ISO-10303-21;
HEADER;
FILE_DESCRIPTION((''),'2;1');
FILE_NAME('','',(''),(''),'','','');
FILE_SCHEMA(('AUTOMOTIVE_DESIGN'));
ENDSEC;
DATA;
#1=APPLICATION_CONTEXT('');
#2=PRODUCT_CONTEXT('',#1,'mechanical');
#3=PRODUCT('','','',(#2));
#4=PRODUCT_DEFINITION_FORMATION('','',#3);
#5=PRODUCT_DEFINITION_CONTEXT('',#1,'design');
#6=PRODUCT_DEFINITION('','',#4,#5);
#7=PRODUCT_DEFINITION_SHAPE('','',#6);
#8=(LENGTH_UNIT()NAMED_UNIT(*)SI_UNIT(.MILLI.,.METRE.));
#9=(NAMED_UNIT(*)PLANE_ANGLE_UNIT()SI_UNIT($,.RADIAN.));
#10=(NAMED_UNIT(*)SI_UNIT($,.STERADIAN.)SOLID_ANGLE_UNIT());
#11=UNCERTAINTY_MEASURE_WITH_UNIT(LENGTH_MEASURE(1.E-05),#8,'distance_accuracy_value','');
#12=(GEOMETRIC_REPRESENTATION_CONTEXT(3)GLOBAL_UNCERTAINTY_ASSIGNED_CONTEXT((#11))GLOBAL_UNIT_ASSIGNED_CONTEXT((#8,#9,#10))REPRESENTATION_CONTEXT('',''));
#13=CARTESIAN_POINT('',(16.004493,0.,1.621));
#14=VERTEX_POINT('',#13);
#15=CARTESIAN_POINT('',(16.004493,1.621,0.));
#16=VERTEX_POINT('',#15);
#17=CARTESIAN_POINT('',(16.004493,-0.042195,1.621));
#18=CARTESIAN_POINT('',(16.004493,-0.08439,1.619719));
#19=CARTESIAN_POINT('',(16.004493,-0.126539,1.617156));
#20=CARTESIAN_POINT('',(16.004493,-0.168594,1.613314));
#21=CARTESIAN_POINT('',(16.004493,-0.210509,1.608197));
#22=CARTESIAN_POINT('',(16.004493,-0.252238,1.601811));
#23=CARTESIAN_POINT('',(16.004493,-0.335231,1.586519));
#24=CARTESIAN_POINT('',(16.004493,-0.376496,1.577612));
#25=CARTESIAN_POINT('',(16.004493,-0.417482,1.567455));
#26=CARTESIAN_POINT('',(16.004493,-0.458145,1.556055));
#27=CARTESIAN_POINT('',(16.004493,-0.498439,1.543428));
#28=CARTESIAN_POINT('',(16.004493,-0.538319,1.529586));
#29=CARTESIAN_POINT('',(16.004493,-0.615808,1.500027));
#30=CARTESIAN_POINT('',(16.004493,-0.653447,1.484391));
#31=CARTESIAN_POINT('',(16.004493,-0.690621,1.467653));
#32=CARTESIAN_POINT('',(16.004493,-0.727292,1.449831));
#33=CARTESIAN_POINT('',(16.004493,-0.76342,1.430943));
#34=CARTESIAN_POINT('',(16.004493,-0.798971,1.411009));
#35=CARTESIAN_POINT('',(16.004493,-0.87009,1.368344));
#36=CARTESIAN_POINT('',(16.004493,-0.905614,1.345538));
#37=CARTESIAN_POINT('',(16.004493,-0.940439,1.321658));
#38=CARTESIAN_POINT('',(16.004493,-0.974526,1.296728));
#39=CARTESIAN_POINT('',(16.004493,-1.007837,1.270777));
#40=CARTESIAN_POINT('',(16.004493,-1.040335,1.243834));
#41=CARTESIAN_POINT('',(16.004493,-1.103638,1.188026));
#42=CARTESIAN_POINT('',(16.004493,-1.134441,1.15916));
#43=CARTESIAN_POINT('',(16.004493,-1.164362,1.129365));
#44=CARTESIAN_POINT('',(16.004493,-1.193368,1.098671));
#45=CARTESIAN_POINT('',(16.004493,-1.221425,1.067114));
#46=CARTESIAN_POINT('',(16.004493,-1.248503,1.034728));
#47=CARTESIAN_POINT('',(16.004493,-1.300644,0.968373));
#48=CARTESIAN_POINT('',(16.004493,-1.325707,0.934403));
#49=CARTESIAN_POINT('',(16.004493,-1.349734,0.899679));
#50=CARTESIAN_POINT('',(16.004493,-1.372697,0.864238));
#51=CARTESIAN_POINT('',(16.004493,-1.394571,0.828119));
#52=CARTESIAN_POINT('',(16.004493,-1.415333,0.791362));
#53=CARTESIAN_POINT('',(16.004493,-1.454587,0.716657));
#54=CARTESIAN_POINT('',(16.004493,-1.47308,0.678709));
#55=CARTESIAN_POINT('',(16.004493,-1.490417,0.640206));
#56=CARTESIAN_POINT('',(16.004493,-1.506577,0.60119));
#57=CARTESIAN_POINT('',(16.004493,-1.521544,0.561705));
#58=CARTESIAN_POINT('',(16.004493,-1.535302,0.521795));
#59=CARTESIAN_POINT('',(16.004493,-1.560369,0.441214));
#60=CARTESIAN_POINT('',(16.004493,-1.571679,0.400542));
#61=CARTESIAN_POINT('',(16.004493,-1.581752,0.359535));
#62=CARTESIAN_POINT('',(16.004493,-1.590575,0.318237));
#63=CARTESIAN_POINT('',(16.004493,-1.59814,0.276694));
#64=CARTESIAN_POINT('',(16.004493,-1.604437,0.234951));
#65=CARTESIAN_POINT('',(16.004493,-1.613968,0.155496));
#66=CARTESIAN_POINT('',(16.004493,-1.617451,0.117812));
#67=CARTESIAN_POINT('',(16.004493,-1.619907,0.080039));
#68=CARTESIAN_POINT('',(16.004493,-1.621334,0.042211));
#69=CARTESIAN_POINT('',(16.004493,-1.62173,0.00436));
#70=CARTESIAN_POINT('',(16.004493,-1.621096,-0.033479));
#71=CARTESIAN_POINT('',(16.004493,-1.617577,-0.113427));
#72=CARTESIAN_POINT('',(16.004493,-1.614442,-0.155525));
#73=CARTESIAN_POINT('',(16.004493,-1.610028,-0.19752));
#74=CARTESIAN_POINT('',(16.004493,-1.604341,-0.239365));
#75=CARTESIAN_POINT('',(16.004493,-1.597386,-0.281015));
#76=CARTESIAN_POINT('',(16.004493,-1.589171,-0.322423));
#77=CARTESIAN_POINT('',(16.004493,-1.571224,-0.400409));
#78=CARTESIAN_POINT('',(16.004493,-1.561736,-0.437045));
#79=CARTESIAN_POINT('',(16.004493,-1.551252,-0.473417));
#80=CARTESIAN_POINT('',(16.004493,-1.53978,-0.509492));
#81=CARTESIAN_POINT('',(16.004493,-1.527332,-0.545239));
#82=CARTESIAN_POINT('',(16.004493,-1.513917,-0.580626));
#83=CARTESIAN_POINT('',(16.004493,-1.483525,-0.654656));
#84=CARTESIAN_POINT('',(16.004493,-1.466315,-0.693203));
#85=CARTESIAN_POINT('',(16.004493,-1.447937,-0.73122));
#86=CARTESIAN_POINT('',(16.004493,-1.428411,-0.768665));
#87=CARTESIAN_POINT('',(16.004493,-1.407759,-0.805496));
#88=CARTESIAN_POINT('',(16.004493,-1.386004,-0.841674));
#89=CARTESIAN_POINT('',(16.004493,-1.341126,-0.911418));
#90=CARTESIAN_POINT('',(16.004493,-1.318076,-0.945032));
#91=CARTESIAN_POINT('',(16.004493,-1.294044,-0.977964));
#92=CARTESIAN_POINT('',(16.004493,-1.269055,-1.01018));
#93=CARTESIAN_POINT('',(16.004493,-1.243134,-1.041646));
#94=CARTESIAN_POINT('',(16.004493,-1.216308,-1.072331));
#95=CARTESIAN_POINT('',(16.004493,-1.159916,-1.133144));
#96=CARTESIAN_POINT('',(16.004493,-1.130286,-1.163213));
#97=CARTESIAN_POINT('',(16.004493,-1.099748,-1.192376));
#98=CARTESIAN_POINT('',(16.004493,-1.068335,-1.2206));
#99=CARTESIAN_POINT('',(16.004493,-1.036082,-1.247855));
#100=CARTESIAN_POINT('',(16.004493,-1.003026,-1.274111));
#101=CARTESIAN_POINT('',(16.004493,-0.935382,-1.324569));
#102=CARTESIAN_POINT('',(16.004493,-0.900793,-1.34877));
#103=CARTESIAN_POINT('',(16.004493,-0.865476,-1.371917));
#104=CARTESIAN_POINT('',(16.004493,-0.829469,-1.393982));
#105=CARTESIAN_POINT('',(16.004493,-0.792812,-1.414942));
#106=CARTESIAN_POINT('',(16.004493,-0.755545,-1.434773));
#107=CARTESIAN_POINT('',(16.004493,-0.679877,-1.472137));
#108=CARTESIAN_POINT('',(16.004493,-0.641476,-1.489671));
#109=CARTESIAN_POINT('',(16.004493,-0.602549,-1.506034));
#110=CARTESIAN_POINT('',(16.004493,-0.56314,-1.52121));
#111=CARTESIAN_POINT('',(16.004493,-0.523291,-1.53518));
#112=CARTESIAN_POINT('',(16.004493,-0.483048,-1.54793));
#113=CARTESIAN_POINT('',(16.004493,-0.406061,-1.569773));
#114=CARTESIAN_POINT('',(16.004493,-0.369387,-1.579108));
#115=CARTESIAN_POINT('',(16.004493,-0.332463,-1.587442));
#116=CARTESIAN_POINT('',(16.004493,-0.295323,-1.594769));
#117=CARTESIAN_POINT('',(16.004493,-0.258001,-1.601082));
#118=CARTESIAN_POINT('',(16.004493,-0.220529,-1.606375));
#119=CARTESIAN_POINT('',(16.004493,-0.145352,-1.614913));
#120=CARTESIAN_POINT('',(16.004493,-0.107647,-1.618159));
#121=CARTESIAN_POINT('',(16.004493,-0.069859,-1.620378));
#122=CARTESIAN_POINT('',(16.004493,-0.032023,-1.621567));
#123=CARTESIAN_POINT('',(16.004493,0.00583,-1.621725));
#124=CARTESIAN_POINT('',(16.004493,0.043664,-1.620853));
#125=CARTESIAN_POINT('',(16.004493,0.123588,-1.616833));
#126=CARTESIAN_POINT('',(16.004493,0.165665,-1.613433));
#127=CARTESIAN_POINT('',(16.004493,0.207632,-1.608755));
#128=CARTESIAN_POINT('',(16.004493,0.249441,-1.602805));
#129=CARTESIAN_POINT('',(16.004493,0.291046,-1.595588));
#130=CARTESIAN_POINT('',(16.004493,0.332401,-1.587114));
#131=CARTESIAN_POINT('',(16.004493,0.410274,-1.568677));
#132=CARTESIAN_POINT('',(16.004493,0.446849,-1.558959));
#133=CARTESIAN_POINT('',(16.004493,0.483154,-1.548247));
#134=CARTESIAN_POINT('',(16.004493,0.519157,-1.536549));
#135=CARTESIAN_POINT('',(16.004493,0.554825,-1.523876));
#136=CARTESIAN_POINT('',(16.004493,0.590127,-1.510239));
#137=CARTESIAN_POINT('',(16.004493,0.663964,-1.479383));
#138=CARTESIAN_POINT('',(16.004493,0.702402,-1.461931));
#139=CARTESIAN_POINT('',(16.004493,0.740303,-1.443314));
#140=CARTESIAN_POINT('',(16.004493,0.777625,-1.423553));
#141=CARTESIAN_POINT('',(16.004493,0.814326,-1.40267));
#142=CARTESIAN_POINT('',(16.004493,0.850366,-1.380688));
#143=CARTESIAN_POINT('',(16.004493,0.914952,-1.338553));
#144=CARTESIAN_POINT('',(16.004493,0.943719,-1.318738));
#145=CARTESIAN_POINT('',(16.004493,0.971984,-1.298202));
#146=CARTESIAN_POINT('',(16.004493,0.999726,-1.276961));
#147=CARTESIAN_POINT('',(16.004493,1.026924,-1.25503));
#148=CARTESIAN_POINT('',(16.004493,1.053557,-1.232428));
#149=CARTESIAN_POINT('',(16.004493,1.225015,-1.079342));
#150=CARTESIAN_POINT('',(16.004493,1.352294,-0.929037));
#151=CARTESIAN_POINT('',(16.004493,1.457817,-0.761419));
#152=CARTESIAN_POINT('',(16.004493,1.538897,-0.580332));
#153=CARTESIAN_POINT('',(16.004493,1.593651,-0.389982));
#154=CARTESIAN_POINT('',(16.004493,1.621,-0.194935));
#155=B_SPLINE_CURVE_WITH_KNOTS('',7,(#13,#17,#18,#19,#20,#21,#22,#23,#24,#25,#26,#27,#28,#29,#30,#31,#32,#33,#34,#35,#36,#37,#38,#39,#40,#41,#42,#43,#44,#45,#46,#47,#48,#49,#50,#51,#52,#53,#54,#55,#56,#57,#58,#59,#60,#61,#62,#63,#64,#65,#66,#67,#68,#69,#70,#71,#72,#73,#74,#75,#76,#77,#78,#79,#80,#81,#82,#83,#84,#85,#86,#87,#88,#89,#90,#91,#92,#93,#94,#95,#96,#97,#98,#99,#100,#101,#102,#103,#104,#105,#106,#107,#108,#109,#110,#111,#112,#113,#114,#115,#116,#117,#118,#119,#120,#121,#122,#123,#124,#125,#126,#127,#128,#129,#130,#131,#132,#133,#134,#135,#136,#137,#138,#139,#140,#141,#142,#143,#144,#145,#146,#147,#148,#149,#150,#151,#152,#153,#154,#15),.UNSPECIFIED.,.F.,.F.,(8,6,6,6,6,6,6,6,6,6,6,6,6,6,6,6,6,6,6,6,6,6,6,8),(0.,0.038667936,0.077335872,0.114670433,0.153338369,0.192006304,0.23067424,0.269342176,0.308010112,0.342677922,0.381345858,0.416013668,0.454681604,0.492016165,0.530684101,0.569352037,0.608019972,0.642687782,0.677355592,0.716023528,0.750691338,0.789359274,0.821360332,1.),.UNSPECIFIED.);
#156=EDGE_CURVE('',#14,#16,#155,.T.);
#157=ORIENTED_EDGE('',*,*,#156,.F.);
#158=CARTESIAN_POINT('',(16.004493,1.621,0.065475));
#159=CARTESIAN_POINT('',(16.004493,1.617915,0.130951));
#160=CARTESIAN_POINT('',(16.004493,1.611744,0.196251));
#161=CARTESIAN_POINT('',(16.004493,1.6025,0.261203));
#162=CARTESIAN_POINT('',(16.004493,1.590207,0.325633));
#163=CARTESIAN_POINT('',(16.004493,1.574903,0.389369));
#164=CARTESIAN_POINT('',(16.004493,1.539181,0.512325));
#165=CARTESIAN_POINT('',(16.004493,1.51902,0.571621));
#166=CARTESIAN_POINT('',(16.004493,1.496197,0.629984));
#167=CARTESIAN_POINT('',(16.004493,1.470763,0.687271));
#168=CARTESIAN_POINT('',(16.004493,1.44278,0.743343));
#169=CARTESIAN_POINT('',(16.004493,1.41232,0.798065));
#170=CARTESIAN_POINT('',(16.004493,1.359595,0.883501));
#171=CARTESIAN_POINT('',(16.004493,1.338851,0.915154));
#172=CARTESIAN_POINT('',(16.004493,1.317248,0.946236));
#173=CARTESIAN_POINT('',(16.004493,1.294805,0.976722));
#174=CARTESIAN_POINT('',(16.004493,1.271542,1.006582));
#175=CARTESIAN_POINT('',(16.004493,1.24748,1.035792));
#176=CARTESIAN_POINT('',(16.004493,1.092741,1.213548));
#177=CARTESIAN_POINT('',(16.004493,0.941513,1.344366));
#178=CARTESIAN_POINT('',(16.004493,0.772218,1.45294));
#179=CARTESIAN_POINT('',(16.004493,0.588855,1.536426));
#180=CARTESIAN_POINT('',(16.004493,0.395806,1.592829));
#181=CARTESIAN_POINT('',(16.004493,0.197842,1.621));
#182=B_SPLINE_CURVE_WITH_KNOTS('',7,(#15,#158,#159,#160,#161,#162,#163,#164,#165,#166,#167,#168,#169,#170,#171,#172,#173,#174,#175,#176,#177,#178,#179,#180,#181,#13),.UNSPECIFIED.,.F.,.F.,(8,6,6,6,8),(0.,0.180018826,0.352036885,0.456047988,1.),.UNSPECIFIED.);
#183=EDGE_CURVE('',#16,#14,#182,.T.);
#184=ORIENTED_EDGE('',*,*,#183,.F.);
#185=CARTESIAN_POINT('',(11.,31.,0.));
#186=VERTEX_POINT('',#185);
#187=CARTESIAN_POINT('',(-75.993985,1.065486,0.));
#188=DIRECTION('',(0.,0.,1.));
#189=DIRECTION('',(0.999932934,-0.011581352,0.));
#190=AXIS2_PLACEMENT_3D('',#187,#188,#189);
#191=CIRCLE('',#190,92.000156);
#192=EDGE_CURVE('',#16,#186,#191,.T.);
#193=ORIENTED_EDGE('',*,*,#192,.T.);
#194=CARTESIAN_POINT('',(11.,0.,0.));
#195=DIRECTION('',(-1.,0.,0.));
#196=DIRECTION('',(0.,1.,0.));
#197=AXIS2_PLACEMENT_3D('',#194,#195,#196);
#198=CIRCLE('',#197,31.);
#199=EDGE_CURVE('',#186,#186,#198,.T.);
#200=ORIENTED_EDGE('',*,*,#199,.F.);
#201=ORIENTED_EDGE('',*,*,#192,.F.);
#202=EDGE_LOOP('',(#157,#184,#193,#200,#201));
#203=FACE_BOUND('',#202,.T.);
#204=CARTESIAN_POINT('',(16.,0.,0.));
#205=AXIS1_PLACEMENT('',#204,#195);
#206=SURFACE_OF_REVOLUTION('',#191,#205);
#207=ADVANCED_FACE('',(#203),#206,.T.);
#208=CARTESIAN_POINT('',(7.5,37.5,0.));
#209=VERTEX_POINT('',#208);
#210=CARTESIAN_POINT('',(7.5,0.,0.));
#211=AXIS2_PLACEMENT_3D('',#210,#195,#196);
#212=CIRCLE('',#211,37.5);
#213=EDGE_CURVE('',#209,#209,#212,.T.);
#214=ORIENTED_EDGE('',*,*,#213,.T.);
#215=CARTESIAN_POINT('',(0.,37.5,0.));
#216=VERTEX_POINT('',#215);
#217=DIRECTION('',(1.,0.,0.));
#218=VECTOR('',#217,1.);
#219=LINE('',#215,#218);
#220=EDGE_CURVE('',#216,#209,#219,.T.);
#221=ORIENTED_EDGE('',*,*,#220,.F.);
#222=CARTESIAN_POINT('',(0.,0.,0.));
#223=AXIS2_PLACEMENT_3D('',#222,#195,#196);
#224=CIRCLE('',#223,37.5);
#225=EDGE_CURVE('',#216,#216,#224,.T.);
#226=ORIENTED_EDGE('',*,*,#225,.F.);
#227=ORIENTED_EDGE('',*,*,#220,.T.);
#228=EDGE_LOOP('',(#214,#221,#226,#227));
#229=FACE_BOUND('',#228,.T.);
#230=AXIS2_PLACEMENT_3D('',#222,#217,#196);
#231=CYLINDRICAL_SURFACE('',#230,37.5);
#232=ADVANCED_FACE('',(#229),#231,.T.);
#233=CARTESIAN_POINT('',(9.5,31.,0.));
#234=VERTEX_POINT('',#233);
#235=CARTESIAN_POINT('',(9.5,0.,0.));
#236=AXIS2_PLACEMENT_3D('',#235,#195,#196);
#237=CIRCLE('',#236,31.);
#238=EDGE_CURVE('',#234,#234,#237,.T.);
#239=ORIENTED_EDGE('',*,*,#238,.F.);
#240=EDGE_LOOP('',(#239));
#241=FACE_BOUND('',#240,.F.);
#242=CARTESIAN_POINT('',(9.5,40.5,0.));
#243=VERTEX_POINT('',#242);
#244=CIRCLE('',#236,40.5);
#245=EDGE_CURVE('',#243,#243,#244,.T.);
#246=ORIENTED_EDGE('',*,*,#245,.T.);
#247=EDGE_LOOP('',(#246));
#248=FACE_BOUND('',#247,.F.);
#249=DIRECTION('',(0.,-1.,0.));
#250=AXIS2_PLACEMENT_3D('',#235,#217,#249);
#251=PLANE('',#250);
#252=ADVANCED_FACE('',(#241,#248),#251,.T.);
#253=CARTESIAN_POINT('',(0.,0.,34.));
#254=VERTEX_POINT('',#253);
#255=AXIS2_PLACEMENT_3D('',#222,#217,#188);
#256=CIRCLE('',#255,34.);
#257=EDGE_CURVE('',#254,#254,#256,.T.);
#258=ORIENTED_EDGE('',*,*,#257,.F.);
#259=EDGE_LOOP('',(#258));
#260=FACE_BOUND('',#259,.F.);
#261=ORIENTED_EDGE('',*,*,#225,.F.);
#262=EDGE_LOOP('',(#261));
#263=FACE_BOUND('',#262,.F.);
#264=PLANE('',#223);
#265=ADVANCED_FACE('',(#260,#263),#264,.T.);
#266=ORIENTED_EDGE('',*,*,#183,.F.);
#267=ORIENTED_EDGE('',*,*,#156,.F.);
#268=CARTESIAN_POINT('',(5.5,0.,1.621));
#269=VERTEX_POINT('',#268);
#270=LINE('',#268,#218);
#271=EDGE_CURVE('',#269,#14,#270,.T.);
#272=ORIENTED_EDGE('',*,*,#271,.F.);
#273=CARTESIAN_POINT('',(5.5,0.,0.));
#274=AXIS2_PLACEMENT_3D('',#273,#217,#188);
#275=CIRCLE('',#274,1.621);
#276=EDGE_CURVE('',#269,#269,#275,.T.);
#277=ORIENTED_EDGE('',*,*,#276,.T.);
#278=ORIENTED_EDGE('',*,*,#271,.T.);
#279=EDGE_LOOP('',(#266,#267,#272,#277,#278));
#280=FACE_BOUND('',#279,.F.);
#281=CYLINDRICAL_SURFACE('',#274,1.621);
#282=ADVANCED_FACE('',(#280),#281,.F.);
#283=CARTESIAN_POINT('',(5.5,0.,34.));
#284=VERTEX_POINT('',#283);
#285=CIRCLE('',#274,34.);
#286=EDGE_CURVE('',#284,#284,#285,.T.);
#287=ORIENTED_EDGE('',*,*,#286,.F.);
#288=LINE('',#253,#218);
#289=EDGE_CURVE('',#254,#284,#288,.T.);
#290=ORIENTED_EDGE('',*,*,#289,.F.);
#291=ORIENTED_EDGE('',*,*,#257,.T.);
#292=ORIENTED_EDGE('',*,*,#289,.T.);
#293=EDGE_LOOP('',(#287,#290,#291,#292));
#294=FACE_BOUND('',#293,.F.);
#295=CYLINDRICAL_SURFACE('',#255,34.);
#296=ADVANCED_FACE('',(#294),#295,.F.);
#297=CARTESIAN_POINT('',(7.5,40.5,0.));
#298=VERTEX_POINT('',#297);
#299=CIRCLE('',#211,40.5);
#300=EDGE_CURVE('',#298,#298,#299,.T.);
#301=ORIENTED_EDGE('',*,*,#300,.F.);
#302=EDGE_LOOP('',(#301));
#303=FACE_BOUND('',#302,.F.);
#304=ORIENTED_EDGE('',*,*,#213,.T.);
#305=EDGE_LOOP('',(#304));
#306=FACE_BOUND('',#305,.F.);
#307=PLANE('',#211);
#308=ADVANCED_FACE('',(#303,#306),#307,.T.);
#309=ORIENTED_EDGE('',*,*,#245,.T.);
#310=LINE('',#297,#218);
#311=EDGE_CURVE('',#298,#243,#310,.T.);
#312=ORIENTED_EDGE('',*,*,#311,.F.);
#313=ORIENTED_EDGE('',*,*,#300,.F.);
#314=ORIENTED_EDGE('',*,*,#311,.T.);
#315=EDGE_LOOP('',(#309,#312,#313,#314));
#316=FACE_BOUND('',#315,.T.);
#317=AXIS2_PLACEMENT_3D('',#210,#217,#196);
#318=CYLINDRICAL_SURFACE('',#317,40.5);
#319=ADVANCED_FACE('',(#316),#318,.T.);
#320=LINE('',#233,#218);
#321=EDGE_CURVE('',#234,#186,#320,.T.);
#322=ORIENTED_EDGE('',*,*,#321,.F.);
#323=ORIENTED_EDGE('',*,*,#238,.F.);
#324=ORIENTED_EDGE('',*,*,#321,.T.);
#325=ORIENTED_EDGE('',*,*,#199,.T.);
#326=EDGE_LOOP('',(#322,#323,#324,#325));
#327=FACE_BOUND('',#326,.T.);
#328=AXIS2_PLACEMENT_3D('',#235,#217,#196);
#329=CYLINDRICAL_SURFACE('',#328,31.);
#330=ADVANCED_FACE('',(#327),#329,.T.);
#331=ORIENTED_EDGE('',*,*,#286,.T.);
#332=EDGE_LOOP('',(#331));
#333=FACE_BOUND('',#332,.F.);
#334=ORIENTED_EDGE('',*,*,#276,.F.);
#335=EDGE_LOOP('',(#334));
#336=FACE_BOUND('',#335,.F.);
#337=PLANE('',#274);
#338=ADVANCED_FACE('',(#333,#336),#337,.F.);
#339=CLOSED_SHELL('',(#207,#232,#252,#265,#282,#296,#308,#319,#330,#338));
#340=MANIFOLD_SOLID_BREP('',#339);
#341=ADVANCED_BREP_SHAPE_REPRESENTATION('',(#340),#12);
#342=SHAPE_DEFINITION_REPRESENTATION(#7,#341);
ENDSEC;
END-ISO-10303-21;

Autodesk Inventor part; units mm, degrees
ref_plane "YZ Plane" through (0, 0, 0) normal (1, 0, 0) x (0, 1, 0)
ref_plane "XZ Plane" through (0, 0, 0) normal (0, 1, 0) x (-1, 0, 0)
ref_plane "XY Plane" through (0, 0, 0) normal (0, 0, 1) x (1, 0, 0)
sketch "Sketch1" plane through (0, 0, 0) normal (0, 0, 1) x (1, 0, 0)
  line L0 (0, 0) -> (0, 37.5)
  line L1 (0, 37.5) -> (7.5, 37.5)
  line L2 (7.5, 37.5) -> (7.5, 40.5)
  line L3 (7.5, 40.5) -> (9.5, 40.5)
  line L4 (9.5, 40.5) -> (9.5, 31)
  line L5 (151.3726, 0) -> (0, 0)
  line L6 (9.5, 31) -> (11, 31)
  arc A0 (16, 0) -> (11, 31) centre (-75.9938, 1.0655) ccw
  line L7 (0, 34) -> (9.5, 34) construction
  dimension "d1" = 2
  dimension "d2" = 7.5
  dimension "d4" = 75
  dimension "d5" = 81
  dimension "d6" = 1.5
  dimension "d7" = 92
  dimension "d8" = 68
  dimension "d9" = 16
  dimension "d10" = 62
revolve "Revolution1" add sketch "Sketch1" angle 360 about axis through (151.3726, 0, 0) along (-1, 0, 0)
sketch "Sketch2" plane through (0, 0, 0) normal (-1, 0, 0) x (0, 0, 1)
  circle A0 centre (0, 0) radius 37.5 projected
hole "Hole1" at (0, 0, 0) direction (1, 0, 0) diameter 68 depth 5.5
sketch "Sketch3" plane through (5.5, 0, 0) normal (-1, 0, 0) x (0, 0, 1)
  circle A0 centre (0, 0) radius 31 projected
hole "Hole2" at (5.5, 0, 0) direction (1, 0, 0) diameter 3.242 end through all thread size "M4x0.7" class "6H" standard "ISO Metric profile"
properties part number "130 part 2" material "Aluminum 6061-AHC"
